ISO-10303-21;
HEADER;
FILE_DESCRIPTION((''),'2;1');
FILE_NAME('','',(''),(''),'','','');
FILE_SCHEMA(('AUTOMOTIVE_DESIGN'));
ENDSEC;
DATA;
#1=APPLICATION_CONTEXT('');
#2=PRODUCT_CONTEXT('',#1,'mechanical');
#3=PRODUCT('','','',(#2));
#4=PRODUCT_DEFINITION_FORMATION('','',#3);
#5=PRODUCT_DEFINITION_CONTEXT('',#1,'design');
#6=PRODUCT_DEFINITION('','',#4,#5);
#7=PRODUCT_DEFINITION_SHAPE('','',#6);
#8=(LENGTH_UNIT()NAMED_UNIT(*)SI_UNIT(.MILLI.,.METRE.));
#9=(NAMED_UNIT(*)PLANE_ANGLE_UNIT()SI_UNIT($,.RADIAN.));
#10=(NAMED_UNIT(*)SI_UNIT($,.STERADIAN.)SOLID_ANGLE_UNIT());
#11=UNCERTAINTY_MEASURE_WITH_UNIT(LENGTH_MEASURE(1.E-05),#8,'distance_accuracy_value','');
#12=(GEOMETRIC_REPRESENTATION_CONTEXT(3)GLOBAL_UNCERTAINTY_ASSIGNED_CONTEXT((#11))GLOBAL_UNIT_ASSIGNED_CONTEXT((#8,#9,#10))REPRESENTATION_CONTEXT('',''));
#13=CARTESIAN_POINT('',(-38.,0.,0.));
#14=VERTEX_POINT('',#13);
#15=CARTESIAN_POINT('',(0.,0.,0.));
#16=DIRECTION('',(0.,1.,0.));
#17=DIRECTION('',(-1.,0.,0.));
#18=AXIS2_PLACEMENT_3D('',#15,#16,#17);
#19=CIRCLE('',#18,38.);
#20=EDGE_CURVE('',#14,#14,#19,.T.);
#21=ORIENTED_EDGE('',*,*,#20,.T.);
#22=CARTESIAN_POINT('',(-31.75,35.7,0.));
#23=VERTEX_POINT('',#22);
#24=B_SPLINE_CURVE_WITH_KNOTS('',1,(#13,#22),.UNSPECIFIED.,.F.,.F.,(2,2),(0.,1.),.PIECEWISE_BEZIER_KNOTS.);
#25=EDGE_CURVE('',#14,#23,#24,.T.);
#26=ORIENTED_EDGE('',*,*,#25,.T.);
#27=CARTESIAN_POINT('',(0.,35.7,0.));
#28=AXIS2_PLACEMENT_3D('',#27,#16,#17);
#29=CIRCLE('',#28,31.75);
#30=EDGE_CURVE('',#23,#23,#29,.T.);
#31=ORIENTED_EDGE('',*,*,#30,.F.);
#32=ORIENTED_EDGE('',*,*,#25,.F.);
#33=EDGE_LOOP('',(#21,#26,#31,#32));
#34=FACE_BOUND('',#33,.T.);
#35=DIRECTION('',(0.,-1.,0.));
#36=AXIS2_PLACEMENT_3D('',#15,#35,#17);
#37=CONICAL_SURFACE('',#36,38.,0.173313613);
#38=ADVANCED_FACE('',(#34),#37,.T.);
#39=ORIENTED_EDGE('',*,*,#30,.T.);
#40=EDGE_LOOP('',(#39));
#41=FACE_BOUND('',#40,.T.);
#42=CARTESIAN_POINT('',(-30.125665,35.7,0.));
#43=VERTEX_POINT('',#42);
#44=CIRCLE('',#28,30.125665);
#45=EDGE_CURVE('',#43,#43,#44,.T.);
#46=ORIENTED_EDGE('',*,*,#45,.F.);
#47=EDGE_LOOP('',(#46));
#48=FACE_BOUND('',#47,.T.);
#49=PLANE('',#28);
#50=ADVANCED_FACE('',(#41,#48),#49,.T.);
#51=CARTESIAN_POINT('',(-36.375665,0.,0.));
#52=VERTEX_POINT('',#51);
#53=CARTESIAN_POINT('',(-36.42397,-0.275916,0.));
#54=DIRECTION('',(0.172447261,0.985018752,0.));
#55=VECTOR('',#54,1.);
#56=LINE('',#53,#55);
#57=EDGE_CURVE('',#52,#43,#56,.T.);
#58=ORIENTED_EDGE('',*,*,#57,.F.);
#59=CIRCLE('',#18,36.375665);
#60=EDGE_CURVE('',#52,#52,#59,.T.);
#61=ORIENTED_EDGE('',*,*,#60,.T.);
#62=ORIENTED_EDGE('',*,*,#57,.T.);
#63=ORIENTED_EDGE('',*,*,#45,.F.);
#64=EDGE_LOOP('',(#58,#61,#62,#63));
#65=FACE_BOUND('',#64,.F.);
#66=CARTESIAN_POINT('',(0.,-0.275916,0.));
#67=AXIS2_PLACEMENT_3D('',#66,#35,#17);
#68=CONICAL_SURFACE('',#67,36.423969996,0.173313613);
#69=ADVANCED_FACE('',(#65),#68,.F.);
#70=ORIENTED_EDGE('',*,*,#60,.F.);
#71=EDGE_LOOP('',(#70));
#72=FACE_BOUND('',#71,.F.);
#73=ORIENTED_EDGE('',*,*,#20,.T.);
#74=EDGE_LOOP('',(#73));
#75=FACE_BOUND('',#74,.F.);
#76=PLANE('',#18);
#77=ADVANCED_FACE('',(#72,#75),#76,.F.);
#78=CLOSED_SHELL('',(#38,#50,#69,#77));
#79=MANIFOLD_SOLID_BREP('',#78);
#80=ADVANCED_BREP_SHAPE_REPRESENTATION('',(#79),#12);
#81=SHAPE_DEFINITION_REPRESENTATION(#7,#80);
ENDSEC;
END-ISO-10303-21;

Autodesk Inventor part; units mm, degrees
ref_plane "YZ Plane" through (0, 0, 0) normal (1, 0, 0) x (0, 1, 0)
ref_plane "XY Plane" through (0, 0, 0) normal (0, 0, 1) x (1, 0, 0)
sketch "Szkic6" plane through (0, 0, 0) normal (0, 1, 0) x (-1, 0, 0)
  circle A0 centre (0, 0) radius 38
  dimension "d33" = 76
ref_plane "Płaszczyzna konstrukcyjna1" through (0, 35.7, 0) normal (0, 1, 0) x (-1, 0, 0)
sketch "Szkic7" plane through (0, 35.7, 0) normal (0, 1, 0) x (-1, 0, 0)
  circle A0 centre (0, 0) radius 31.75
  dimension "d35" = 63.5
loft "Wyciągnięcie złożone1" add profiles "Szkic6", "Szkic7"
shell "Skorupa1" thickness 1.6 removed faces 2 at (14.3997, 35.7, 5.5289) at (-9.1519, 0, 15.3991)
equation "\"d33\" = OD1"
equation "\"d35\" = OD2"
equation "\"d52\" = THK"
equation "\"SzerokośćGięciaPodcięcia\" = Grubość"
equation "\"RozmiarPodcięciaNarożnika\" = 4 * Grubość"
equation "\"PromieńPrzejścia\" = PromieńGięcia"
equation "\"Rozmiar_promienia_Jacobiego\" = PromieńGięcia"
equation "\"Wielk_odstępu\" = Grubość"
equation "\"d2\" = PromieńGięcia"
equation "\"d23\" = PromieńGięcia"
equation "\"OD1\" = 76"
equation "\"OD2\" = 63.5"
equation "\"L\" = 35.7"
equation "\"THK\" = 1.6"
equation "\"d34\" = L"
equation "\"Grubość\" = 1.5"
equation "\"PromieńGięcia\" = 3"
properties part number "Redukcja symetryczna Ø76x63,5x1,6 L=35,7" material "304"
